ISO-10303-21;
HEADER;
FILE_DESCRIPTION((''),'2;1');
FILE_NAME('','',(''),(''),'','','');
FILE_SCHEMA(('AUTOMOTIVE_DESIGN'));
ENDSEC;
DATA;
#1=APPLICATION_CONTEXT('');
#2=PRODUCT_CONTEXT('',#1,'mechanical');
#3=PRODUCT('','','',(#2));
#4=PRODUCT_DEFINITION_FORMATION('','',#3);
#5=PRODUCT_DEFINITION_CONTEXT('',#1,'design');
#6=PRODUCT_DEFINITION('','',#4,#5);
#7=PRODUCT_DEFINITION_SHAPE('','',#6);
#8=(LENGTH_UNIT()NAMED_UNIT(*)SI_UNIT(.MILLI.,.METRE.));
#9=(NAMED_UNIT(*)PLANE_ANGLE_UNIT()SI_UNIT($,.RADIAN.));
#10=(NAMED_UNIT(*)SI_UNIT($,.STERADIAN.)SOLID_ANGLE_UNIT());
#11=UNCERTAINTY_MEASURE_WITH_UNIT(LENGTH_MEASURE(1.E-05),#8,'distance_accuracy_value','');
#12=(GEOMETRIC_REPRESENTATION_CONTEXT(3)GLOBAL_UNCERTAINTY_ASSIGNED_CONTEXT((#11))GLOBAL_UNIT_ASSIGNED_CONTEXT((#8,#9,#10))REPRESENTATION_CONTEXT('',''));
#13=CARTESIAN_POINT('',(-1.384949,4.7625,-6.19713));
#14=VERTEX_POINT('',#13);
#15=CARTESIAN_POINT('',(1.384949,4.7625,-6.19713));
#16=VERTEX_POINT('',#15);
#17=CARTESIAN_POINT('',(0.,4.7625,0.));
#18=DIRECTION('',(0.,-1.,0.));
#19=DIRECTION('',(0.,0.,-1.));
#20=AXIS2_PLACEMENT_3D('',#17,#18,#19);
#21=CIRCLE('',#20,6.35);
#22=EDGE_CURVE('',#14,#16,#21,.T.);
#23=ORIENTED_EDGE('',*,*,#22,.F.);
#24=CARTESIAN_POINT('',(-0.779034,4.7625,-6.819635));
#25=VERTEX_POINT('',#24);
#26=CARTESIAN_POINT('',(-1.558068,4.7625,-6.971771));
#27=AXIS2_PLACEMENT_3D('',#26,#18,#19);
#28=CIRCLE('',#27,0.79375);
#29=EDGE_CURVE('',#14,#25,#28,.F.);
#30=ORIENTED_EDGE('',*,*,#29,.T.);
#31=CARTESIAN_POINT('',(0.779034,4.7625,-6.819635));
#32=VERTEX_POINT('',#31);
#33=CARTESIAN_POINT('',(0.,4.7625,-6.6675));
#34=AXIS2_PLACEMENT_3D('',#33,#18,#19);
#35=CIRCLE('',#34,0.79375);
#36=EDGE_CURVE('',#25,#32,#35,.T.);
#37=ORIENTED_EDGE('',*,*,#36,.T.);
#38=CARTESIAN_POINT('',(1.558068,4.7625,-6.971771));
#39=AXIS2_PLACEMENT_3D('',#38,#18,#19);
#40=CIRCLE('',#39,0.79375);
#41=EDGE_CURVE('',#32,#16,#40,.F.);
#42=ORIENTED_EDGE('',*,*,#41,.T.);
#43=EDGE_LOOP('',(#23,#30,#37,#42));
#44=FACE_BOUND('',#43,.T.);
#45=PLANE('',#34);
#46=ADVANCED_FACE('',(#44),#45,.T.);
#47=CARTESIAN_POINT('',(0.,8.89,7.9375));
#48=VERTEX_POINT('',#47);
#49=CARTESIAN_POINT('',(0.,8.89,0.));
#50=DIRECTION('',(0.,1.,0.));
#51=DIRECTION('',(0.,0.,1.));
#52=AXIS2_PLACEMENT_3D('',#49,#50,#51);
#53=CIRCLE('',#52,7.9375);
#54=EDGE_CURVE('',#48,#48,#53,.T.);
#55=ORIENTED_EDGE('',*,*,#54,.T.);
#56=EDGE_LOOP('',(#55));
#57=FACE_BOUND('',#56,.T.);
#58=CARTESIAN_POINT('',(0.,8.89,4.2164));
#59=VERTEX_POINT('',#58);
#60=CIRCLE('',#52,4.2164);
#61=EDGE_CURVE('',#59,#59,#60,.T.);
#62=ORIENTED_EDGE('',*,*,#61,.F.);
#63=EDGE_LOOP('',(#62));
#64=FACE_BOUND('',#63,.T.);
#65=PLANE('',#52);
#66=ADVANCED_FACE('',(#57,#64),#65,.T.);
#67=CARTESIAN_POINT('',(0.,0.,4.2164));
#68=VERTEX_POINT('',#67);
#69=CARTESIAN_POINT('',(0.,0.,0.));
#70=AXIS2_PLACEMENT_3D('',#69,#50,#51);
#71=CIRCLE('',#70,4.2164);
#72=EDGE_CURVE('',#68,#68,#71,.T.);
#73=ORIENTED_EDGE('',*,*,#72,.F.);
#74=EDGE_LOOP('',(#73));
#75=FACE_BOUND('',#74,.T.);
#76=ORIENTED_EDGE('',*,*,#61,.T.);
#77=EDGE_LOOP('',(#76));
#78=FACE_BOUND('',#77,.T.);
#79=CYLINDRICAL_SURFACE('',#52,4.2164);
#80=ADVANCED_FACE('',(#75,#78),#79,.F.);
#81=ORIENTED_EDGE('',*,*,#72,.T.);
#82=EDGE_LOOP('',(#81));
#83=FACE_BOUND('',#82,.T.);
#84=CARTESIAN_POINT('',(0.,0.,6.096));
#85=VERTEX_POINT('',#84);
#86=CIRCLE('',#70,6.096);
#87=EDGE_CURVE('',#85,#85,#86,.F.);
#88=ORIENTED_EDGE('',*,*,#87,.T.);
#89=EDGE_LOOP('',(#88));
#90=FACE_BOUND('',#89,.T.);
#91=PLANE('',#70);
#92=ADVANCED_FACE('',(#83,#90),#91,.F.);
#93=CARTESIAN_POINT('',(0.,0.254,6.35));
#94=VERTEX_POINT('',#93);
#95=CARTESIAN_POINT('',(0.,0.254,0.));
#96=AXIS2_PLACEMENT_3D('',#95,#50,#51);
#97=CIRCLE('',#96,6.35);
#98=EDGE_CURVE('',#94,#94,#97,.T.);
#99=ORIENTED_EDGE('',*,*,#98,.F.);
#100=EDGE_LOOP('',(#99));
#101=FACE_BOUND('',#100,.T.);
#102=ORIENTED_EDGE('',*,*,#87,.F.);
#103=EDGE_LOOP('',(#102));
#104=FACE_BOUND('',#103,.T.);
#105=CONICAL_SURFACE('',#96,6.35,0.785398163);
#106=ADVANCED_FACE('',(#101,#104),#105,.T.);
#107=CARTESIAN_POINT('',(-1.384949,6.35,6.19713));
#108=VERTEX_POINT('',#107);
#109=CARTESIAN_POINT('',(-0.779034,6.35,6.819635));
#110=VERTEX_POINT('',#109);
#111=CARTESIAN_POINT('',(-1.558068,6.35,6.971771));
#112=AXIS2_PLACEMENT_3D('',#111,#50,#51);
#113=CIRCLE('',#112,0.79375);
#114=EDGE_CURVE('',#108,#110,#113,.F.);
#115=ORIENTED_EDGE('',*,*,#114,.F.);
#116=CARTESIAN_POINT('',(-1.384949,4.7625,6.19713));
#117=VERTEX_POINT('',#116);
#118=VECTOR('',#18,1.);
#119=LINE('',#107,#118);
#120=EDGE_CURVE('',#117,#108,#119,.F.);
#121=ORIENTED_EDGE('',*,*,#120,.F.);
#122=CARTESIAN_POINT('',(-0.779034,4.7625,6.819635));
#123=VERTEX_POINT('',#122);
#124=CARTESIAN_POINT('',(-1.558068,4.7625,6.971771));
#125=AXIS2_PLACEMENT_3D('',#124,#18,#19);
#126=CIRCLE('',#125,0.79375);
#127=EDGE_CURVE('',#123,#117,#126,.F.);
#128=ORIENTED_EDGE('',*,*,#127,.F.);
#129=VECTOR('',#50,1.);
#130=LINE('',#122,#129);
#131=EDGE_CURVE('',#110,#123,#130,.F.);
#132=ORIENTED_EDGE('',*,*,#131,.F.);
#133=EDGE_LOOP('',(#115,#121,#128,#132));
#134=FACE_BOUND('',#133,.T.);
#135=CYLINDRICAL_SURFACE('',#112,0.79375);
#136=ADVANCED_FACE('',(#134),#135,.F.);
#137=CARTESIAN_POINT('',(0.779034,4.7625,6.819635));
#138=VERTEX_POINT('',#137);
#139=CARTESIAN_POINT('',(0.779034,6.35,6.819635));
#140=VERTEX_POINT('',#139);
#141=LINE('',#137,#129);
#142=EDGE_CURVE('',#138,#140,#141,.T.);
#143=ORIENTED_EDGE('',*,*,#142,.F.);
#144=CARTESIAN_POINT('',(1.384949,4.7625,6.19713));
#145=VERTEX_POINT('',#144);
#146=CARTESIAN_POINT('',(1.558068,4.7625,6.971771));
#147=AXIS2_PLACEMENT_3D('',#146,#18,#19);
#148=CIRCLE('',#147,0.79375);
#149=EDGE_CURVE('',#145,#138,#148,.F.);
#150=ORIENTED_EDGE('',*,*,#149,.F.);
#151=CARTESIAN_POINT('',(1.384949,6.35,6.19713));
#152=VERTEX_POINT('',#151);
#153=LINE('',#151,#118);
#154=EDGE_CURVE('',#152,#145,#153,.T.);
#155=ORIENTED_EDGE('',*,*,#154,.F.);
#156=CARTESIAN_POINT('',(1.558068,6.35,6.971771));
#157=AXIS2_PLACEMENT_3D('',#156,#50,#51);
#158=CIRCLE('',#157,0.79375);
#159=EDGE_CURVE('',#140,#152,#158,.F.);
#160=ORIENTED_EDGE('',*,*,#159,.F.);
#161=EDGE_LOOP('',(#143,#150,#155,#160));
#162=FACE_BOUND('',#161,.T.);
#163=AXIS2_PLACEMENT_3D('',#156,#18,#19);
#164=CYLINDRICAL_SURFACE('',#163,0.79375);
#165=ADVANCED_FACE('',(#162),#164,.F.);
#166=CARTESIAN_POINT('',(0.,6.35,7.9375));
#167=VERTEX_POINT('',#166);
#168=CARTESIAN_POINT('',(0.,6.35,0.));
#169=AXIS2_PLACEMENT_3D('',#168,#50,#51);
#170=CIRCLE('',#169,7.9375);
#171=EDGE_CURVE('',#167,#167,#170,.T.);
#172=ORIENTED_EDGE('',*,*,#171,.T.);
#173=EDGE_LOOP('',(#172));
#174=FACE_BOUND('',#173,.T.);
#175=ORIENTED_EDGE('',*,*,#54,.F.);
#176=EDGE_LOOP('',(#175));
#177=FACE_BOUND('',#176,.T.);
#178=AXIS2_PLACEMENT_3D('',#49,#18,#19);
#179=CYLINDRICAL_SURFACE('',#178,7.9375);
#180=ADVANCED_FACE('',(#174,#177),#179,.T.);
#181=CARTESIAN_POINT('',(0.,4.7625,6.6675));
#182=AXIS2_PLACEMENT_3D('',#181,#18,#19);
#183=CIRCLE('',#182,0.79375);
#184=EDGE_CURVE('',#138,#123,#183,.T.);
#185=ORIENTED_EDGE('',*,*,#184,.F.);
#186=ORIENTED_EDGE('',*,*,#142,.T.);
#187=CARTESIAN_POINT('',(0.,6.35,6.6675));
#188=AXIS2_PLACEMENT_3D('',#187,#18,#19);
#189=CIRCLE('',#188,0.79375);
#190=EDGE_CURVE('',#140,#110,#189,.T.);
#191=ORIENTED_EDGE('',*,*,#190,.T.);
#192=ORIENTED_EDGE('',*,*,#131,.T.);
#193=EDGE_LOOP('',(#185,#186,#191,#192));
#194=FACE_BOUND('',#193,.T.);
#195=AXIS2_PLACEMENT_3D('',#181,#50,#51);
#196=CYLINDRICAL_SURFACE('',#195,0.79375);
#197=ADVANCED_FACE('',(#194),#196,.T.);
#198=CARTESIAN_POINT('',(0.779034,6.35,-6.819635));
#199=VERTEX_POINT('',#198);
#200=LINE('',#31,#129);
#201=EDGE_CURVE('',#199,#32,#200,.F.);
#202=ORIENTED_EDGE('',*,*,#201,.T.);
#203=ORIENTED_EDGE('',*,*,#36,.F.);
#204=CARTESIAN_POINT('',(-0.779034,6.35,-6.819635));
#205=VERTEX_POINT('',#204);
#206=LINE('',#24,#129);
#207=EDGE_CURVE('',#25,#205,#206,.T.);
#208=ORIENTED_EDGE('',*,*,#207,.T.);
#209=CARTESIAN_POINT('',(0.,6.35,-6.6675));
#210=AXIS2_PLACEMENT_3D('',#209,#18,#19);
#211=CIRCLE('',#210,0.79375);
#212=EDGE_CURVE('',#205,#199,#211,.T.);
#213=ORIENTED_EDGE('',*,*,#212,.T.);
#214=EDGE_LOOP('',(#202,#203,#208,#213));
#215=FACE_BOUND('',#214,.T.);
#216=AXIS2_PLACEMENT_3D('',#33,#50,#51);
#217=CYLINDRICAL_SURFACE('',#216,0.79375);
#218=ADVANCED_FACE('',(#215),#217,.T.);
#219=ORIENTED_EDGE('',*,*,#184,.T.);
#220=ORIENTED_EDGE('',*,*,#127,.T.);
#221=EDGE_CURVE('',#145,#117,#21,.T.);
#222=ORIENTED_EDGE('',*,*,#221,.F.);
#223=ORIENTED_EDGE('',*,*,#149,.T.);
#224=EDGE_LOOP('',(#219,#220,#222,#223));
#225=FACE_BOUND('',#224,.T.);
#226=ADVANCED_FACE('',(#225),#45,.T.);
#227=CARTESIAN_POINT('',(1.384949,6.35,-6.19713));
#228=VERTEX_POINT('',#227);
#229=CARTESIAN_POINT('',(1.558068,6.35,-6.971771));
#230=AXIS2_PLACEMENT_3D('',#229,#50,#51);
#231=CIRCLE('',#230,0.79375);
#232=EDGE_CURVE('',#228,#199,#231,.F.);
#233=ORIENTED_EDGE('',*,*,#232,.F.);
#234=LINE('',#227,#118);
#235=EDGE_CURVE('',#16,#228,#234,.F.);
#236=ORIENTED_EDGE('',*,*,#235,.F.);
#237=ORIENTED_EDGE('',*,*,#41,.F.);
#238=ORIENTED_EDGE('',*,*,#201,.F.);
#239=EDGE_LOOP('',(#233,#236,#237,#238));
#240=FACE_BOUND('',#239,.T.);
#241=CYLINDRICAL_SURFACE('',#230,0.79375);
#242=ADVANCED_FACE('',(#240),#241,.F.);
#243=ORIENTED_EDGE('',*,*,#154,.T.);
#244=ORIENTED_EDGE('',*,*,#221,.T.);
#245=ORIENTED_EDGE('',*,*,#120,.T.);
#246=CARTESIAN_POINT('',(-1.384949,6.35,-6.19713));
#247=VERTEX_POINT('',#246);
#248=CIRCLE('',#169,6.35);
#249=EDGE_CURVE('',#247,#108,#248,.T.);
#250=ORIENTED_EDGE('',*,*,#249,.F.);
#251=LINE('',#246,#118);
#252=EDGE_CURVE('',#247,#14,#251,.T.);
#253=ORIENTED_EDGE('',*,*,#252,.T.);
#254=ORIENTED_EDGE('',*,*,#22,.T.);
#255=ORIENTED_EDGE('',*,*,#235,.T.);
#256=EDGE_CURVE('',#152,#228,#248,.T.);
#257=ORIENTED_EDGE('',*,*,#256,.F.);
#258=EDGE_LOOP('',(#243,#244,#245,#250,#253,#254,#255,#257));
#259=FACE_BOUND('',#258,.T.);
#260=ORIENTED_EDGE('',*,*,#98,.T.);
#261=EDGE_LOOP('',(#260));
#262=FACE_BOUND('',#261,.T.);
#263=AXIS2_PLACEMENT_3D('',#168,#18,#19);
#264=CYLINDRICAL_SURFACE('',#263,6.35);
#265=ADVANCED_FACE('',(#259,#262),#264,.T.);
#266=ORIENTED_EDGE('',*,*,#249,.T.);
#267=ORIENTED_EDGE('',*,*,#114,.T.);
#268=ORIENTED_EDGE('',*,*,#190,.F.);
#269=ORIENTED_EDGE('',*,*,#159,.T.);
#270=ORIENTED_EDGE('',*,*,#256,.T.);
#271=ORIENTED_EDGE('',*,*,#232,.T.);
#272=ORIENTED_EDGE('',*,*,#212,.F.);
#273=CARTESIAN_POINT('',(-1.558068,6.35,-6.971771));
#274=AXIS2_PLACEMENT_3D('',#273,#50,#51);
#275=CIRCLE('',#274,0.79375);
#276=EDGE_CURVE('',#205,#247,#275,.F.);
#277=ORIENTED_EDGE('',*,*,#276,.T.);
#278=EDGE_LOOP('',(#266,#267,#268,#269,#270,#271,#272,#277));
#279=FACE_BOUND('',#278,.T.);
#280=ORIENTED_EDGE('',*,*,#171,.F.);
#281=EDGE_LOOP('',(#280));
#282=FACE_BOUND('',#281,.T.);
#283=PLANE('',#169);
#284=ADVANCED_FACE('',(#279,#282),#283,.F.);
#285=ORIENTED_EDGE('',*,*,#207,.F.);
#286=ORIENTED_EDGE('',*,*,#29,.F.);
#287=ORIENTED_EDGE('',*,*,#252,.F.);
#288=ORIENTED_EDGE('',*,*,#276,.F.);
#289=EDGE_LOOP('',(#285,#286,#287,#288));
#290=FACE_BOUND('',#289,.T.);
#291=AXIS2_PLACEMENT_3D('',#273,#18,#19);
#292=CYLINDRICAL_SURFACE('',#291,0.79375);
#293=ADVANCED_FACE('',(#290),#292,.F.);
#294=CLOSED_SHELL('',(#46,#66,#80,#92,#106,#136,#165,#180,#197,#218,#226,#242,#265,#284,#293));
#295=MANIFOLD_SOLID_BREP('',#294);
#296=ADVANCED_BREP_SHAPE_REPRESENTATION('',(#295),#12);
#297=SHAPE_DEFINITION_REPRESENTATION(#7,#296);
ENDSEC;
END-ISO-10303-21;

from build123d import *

# Parameters (mm, degrees)
SKETCH2_R                   = 6.35
BOSS_EXTRUDE1_DEPTH         = 6.35
SKETCH3_R                   = 7.9375
BOSS_EXTRUDE2_DEPTH         = 2.54
BOSS_EXTRUDE3_DEPTH         = 1.5875
F_3_8_24_TAPPED_HOLE1_D     = 8.4328
F_3_8_24_TAPPED_HOLE1_DEPTH = 22.352
F_3_8_24_TAPPED_HOLE1_TIP   = 2.533468714
CHAMFER1_SIZE               = 0.254
FILLET1_R                   = 0.79375


with BuildPart() as part:
    # Sketch2 → Boss-Extrude1 (new body)
    with BuildSketch(Plane(origin=(0, 0, 0), x_dir=(1, 0, 0), z_dir=(0, 1, 0))):
        with Locations(Location((0, 0, 0), (0, 0, 270))):
            Circle(SKETCH2_R)
    extrude(amount=BOSS_EXTRUDE1_DEPTH)

    # Sketch3 → Boss-Extrude2 (add)
    with BuildSketch(Plane(origin=(0, 6.35, 0), x_dir=(1, 0, 0), z_dir=(0, 1, 0))):
        with Locations(Location((0, 0, 0), (0, 0, 270))):
            Circle(SKETCH3_R)
    extrude(amount=BOSS_EXTRUDE2_DEPTH)

    # Sketch8 → Boss-Extrude3 (add)
    with BuildSketch(Plane.XZ.offset(-6.35)):
        with BuildLine():
            Line((-0.79375, -6.6675), (-0.79375, 6.6675))
            ThreePointArc((-0.79375, 6.6675), (0, 7.46125), (0.79375, 6.6675))
            Line((0.79375, 6.6675), (0.79375, -6.6675))
            ThreePointArc((0.79375, -6.6675), (0, -7.46125), (-0.79375, -6.6675))
        make_face()
    extrude(amount=BOSS_EXTRUDE3_DEPTH)

    # 3/8-24 Tapped Hole1
    with Locations(Plane(origin=(0, 8.89, 0), x_dir=(-1, 0, 0), z_dir=(0, 1, 0))):
        with Locations((0, 0)):
            Hole(F_3_8_24_TAPPED_HOLE1_D / 2, depth=F_3_8_24_TAPPED_HOLE1_DEPTH)
            with Locations((0, 0, -(F_3_8_24_TAPPED_HOLE1_DEPTH + F_3_8_24_TAPPED_HOLE1_TIP / 2))):  # 118° drill point
                Cone(0, F_3_8_24_TAPPED_HOLE1_D / 2, F_3_8_24_TAPPED_HOLE1_TIP, mode=Mode.SUBTRACT)

    # Chamfer1
    chamfer1_edges = [part.edges().sort_by_distance(p)[0] for p in [
        (0, 0, -6.35),
    ]]
    chamfer(chamfer1_edges, length=CHAMFER1_SIZE)

    # Fillet1
    # the kernel refuses this fillet: 0.79375 mm, written as the material it adds along each edge
    with BuildSketch(Plane(origin=(0.79375, 7.850289674, 6.300195309), x_dir=(0.985141793538893, 0, -0.17174296673509887), z_dir=(0, -1, 0)), Plane(origin=(-0.79375, 7.850289674, -6.300195309), x_dir=(-0.985141793538893, 0, 0.17174296673509887), z_dir=(0, -1, 0))) as fillet1_piece_1:
        with BuildLine():
            CenterArc((0.637623112, 0.792863336), FILLET1_R, 200.939239267, 66.352342207)
            Line((-0.103707592, 0.509194779), (-0.177840663, 0.480827923))
            ThreePointArc((-0.177840663, 0.480827923), (-0.141277627, 0.348215104), (-0.07819563, -0.013632098))
            Line((-0.07819563, -0.013632098), (0.003750724, -0.079286334))
            ThreePointArc((0.003750724, -0.079286334), (0.300057935, -0.072281687), (0.596365145, -0.079286334))
            Line((0.596365145, -0.079286334), (0.60011587, 0))
        make_face()
    extrude(amount=3.087789674)
    with BuildSketch(Plane(origin=(0.79375, 7.850289674, -6.300195309), x_dir=(0.985141793538893, 0, 0.17174296673509887), z_dir=(0, -1, 0)), Plane(origin=(-0.79375, 7.850289674, 6.300195309), x_dir=(-0.985141793538893, 0, -0.17174296673509887), z_dir=(0, -1, 0))) as fillet1_piece_2:
        with BuildLine():
            CenterArc((0.637623112, -0.792863336), FILLET1_R, 92.708418526, 66.352342207)
            Line((-0.103707592, -0.509194779), (-0.177840663, -0.480827923))
            ThreePointArc((-0.177840663, -0.480827923), (-0.141277627, -0.348215104), (-0.07819563, 0.013632098))
            Line((-0.07819563, 0.013632098), (0.003750724, 0.079286334))
            ThreePointArc((0.003750724, 0.079286334), (0.300057935, 0.072281687), (0.596365145, 0.079286334))
            Line((0.596365145, 0.079286334), (0.60011587, 0))
        make_face()
    extrude(amount=3.087789674)


solid = part.part
